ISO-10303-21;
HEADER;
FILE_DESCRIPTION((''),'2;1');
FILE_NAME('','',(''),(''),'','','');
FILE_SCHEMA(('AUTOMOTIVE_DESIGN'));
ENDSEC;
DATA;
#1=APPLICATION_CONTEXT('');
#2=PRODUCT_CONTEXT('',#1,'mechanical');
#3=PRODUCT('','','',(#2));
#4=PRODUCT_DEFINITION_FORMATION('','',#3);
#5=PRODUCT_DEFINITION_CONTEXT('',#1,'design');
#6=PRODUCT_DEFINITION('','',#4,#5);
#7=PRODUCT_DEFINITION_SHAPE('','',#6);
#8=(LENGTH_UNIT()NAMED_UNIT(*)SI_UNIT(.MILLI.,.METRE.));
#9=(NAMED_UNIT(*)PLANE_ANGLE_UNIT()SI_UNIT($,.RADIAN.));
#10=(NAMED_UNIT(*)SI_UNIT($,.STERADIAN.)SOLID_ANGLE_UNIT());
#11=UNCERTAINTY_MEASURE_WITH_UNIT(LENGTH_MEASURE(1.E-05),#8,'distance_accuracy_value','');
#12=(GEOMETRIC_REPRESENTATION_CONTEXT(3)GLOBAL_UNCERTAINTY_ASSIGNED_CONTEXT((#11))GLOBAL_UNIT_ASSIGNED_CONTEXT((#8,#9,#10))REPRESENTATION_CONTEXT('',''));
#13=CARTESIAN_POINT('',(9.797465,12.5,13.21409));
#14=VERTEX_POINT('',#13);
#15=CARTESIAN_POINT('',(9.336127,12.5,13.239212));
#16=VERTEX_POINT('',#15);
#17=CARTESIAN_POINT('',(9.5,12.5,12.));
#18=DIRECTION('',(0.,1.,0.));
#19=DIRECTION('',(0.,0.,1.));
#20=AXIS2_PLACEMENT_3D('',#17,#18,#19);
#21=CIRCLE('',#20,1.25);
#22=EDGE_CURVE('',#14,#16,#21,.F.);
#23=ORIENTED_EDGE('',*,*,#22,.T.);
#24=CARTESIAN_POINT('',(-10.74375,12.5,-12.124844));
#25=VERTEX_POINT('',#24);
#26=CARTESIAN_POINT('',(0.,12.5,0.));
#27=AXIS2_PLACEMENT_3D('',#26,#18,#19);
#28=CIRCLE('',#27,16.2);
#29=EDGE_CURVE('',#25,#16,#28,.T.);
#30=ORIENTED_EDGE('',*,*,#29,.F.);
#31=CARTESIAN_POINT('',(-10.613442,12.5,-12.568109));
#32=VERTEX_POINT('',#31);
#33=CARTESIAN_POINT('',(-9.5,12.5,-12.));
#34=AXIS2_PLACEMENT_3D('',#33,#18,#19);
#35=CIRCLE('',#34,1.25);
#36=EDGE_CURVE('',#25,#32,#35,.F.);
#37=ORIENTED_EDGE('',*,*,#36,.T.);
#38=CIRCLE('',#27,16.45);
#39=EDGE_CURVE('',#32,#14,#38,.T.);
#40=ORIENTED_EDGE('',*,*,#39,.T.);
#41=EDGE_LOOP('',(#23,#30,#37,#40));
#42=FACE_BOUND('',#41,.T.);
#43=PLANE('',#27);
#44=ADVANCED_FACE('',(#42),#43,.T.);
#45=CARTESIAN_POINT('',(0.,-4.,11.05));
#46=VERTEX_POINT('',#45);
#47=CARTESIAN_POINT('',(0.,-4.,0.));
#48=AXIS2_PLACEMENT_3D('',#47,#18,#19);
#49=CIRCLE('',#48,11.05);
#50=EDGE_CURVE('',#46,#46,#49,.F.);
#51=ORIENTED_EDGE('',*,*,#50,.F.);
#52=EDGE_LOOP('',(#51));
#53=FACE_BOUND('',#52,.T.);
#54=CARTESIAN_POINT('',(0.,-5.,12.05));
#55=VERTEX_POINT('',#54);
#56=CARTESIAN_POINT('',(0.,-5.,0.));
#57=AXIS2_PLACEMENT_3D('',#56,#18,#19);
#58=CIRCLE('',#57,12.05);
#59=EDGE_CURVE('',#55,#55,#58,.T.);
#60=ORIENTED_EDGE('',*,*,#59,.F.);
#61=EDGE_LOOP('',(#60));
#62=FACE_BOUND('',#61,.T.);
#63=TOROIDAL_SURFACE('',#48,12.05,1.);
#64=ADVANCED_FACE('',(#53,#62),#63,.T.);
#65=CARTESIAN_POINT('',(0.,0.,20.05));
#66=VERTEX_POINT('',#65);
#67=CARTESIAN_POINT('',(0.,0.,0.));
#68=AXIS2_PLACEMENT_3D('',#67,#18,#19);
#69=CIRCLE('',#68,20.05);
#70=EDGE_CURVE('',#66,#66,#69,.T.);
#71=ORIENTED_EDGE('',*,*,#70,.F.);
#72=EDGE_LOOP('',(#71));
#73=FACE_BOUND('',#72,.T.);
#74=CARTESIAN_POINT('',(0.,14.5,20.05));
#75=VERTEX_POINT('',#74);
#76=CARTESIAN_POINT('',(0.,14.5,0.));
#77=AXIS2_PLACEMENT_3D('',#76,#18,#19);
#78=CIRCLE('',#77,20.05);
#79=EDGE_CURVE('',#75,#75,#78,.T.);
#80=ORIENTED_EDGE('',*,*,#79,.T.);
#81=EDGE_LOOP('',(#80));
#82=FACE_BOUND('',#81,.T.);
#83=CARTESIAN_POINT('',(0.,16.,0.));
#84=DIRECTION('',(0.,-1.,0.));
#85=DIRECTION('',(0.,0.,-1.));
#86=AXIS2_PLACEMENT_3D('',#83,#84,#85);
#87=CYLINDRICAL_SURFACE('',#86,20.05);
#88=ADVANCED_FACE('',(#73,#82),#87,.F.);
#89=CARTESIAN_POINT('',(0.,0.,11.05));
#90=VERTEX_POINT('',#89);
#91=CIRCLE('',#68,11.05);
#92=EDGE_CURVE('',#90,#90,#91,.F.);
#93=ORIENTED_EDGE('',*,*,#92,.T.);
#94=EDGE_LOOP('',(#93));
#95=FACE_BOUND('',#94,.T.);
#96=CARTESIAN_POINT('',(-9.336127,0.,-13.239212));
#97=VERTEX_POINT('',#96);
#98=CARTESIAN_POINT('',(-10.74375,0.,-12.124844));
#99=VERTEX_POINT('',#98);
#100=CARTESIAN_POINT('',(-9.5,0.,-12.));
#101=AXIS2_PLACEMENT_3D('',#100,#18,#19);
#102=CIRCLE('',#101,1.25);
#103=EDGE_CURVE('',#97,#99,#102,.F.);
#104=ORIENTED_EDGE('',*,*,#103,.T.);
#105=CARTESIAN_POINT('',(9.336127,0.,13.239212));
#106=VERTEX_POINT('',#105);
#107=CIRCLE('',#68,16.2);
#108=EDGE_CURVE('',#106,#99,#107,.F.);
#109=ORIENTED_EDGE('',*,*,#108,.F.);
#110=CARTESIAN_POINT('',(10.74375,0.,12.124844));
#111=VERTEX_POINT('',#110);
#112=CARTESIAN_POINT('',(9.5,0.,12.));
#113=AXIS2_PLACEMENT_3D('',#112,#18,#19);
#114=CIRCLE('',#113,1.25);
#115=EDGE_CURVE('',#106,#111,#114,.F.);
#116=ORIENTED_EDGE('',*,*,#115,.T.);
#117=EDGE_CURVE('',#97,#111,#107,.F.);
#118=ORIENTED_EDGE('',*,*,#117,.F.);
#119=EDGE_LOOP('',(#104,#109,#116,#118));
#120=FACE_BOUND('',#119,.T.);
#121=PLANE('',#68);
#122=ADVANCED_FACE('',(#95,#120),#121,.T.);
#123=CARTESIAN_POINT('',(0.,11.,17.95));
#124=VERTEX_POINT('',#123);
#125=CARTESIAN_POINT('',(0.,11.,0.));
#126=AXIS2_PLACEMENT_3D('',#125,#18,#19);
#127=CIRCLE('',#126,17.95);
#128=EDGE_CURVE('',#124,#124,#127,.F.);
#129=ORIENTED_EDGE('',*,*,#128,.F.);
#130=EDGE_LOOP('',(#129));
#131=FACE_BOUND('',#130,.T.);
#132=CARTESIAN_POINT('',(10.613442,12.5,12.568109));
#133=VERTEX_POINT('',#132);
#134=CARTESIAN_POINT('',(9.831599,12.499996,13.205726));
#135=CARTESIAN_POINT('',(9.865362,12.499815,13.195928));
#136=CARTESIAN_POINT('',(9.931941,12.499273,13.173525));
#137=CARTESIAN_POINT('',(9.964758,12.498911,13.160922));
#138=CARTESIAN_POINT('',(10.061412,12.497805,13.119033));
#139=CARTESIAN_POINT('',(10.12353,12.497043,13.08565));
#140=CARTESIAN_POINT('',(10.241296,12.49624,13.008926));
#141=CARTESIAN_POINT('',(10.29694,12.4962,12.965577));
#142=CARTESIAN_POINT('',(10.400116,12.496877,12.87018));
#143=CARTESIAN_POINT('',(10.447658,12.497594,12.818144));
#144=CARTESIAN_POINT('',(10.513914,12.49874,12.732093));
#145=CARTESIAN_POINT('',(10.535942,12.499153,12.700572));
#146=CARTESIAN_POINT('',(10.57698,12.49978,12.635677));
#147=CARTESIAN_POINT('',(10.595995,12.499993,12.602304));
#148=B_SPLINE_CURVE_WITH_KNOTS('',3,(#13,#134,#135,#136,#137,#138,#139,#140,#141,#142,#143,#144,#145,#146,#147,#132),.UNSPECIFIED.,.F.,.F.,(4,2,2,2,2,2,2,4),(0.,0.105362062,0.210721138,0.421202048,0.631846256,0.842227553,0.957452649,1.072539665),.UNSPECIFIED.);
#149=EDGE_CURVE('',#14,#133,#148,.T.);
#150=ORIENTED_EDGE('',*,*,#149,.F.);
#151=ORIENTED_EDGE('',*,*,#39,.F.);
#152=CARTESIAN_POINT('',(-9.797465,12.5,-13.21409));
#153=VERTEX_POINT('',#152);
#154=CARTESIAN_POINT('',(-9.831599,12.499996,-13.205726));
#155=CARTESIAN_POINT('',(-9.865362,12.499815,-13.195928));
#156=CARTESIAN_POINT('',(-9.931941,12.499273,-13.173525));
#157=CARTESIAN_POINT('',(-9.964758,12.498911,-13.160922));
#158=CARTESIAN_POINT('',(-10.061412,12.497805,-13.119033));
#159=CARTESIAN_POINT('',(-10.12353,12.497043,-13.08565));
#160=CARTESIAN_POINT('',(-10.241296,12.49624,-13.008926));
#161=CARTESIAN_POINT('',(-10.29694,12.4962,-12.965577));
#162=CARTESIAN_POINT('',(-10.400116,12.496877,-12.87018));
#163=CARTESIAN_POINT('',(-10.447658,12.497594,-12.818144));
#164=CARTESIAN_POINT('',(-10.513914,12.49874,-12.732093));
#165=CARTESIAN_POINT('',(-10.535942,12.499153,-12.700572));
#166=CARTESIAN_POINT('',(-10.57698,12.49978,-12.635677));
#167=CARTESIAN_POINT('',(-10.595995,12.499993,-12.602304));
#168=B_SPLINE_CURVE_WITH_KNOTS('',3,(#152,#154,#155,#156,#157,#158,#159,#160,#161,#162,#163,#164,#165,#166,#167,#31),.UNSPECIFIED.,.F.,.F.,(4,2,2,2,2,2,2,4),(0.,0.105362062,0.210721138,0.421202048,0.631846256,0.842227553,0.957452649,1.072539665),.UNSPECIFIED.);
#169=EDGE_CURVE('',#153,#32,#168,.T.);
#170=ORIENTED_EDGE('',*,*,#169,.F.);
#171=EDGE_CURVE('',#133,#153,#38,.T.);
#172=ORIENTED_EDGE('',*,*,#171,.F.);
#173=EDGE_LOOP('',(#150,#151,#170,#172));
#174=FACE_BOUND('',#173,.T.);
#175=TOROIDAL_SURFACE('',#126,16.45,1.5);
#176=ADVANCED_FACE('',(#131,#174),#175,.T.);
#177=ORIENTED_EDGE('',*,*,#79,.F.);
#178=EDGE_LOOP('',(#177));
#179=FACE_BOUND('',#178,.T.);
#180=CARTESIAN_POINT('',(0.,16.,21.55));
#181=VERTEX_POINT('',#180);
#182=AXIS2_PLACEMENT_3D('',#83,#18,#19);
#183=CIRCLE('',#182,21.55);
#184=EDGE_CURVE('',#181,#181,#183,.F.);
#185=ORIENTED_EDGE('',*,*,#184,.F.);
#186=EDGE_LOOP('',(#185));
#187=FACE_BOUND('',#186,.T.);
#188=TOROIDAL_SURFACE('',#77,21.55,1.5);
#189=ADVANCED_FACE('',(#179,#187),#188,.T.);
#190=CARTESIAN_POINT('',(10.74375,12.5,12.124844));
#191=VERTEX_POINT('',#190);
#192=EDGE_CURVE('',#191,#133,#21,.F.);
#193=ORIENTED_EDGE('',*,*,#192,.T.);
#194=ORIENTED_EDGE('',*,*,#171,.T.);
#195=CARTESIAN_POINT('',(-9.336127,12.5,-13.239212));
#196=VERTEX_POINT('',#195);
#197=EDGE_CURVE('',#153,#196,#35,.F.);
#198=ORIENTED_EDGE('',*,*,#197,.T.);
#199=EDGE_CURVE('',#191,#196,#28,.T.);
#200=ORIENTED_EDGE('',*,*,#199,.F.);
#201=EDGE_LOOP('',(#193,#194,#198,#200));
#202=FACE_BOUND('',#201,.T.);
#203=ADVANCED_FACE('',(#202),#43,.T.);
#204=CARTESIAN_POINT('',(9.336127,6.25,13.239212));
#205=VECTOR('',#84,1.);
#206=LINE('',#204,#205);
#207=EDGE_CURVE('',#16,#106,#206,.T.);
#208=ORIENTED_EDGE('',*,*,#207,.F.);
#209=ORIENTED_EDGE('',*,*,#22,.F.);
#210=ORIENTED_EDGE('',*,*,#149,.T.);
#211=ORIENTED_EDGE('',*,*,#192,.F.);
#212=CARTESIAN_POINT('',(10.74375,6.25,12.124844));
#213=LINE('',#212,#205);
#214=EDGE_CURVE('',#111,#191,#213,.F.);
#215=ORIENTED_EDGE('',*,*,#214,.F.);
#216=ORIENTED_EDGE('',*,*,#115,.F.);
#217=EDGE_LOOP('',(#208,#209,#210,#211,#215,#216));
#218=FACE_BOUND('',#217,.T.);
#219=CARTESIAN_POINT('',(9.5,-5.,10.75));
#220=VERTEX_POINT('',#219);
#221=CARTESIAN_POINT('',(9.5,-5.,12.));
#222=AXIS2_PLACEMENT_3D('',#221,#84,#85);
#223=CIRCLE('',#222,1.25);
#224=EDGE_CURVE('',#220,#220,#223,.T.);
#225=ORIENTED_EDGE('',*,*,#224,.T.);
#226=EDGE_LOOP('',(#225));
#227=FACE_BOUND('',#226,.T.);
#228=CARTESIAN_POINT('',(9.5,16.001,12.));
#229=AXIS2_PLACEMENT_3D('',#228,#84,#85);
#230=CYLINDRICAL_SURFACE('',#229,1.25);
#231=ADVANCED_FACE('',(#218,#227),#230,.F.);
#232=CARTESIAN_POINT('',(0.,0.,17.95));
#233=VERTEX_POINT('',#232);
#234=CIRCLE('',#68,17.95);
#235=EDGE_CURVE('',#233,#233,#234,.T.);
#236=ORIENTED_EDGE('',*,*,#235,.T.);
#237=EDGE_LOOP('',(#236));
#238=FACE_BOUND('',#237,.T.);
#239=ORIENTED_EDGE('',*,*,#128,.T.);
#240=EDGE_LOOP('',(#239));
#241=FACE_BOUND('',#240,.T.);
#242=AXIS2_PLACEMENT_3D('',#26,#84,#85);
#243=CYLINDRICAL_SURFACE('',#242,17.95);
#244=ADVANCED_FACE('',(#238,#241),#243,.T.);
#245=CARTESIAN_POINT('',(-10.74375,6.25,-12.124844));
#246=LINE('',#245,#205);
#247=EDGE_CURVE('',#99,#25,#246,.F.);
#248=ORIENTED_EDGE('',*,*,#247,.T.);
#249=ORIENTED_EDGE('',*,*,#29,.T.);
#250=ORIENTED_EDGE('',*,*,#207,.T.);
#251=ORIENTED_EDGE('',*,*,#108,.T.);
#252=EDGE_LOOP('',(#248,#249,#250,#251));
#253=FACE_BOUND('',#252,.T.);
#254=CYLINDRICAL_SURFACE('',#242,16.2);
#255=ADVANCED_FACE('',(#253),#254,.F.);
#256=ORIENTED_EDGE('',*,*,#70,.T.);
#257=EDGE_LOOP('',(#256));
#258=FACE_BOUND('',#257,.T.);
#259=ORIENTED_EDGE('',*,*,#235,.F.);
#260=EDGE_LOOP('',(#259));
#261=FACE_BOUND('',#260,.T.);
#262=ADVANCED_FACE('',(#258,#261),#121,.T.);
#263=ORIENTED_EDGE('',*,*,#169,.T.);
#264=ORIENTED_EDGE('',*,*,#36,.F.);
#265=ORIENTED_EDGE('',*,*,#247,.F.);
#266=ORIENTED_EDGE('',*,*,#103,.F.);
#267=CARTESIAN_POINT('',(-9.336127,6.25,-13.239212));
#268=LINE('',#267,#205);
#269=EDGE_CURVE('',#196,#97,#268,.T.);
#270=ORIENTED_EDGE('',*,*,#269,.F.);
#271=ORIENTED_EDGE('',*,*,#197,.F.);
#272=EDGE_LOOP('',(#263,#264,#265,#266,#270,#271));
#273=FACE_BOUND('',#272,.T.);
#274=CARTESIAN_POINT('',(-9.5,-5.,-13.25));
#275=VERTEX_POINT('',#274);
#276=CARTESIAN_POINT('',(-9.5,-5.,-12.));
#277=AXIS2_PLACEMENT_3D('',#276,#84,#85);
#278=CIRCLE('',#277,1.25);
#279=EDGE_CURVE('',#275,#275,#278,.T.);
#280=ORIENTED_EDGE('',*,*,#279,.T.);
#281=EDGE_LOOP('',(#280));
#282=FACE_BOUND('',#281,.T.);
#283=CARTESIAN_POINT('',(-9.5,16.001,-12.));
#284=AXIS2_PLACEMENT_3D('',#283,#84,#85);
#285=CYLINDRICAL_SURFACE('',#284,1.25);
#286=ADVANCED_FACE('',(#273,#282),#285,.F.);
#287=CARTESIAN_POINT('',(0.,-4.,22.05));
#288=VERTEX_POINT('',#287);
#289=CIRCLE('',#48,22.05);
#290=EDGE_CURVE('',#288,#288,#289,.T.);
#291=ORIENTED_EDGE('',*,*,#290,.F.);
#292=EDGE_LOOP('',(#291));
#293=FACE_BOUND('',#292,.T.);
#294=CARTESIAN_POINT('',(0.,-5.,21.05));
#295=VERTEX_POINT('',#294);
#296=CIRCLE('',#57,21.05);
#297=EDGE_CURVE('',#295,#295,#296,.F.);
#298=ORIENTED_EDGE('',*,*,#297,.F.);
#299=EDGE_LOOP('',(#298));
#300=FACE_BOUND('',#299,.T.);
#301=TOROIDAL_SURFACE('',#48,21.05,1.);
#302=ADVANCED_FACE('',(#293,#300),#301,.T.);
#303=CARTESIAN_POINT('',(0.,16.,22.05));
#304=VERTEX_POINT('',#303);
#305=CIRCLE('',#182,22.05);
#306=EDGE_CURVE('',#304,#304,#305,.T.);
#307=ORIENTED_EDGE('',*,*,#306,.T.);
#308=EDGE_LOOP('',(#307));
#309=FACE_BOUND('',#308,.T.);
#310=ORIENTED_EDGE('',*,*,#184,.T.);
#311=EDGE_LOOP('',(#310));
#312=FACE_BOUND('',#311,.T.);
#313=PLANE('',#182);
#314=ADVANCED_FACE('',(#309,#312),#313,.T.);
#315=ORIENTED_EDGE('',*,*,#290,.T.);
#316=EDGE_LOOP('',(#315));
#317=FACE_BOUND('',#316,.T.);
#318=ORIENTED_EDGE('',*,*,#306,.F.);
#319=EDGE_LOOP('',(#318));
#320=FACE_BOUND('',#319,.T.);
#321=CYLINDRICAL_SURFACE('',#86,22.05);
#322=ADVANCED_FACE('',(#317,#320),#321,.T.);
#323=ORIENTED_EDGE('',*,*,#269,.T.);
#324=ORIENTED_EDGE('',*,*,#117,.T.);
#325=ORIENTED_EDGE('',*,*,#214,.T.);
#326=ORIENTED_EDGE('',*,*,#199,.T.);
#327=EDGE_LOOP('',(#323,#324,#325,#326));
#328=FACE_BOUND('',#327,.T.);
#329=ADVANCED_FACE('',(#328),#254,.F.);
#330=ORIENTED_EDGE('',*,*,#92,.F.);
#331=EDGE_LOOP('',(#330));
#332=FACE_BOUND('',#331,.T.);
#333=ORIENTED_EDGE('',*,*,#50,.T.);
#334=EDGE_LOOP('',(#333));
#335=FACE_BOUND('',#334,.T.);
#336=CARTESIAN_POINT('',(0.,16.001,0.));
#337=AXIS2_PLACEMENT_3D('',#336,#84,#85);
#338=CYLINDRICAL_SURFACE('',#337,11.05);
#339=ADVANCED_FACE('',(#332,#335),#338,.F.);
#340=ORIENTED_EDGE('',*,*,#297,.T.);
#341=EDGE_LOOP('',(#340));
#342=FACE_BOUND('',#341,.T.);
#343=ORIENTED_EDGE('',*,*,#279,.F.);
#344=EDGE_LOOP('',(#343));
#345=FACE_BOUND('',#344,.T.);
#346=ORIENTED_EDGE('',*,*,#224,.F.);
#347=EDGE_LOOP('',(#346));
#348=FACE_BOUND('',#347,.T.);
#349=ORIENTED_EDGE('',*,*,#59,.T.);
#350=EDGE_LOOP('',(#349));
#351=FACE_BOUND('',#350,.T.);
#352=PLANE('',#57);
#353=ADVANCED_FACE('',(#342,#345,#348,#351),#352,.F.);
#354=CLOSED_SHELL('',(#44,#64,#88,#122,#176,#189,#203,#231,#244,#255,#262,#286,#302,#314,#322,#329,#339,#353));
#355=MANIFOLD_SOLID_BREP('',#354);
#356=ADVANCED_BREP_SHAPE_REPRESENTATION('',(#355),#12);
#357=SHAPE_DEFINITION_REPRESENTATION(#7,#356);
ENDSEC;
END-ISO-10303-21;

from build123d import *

# Parameters (mm, degrees)
CROQUIS1_R              = 22.05
CROQUIS1_R_2            = 20.05
SALIENTE_EXTRUIR1_DEPTH = 16
CROQUIS1_4_R            = 17.95
CROQUIS1_4_R_2          = 16.2
SALIENTE_EXTRUIR2_DEPTH = 12.5
SALIENTE_EXTRUIR4_START = -5
CROQUIS1_6_R            = 22.05
CROQUIS1_6_R_2          = 20.05
CROQUIS1_6_R_3          = 17.95
CROQUIS1_6_R_4          = 16.2
SALIENTE_EXTRUIR4_DEPTH = 5
CORTAR_EXTRUIR1_REACH   = 39.595
CROQUIS4_R              = 11.05
CROQUIS4_R_2            = 1.25
REDONDEO1_R             = 1
REDONDEO2_R             = 1.5
REDONDEO3_R             = 1


with BuildPart() as part:
    # Croquis1 → Saliente-Extruir1 (new body)
    with BuildSketch(Plane(origin=(0, 0, 0), x_dir=(1, 0, 0), z_dir=(0, 1, 0))):
        with Locations(Location((0, 0, 0), (0, 0, 270))):
            Circle(CROQUIS1_R)
        with Locations(Location((0, 0, 0), (0, 0, 270))):
            Circle(CROQUIS1_R_2, mode=Mode.SUBTRACT)
    extrude(amount=SALIENTE_EXTRUIR1_DEPTH)



with BuildPart() as body_2:
    # Croquis1<4> → Saliente-Extruir2 (new body)
    with BuildSketch(Plane(origin=(0, 0, 0), x_dir=(1, 0, 0), z_dir=(0, 1, 0))):
        with Locations(Location((0, 0, 0), (0, 0, 270))):
            Circle(CROQUIS1_4_R)
        with Locations(Location((0, 0, 0), (0, 0, 270))):
            Circle(CROQUIS1_4_R_2, mode=Mode.SUBTRACT)
    extrude(amount=SALIENTE_EXTRUIR2_DEPTH)


with BuildPart() as part_1:
    add(part.part)

    add(body_2.part)  # Saliente-Extruir4 merges body 2
    # Croquis1<6> → Saliente-Extruir4 (add)
    # profile 1 of 4: a face of its own
    with BuildSketch(Plane(origin=(0, 0, 0), x_dir=(1, 0, 0), z_dir=(0, 1, 0)).offset(SALIENTE_EXTRUIR4_START)):
        with Locations(Location((0, 0, 0), (0, 0, 270))):
            Circle(CROQUIS1_6_R)
        with Locations(Location((0, 0, 0), (0, 0, 270))):
            Circle(CROQUIS1_6_R_2, mode=Mode.SUBTRACT)
    # profile 2 of 4: a face of its own
    with BuildSketch(Plane(origin=(0, 0, 0), x_dir=(1, 0, 0), z_dir=(0, 1, 0)).offset(SALIENTE_EXTRUIR4_START)):
        with Locations(Location((0, 0, 0), (0, 0, 270))):
            Circle(CROQUIS1_6_R_2)
        with Locations(Location((0, 0, 0), (0, 0, 270))):
            Circle(CROQUIS1_6_R_3, mode=Mode.SUBTRACT)
    # profile 3 of 4: a face of its own
    with BuildSketch(Plane(origin=(0, 0, 0), x_dir=(1, 0, 0), z_dir=(0, 1, 0)).offset(SALIENTE_EXTRUIR4_START)):
        with Locations(Location((0, 0, 0), (0, 0, 270))):
            Circle(CROQUIS1_6_R_3)
        with Locations(Location((0, 0, 0), (0, 0, 270))):
            Circle(CROQUIS1_6_R_4, mode=Mode.SUBTRACT)
    # profile 4 of 4: a face of its own
    with BuildSketch(Plane(origin=(0, 0, 0), x_dir=(1, 0, 0), z_dir=(0, 1, 0)).offset(SALIENTE_EXTRUIR4_START)):
        with Locations(Location((0, 0, 0), (0, 0, 270))):
            Circle(CROQUIS1_6_R_4)
    extrude(amount=SALIENTE_EXTRUIR4_DEPTH)

    # Croquis4 → Cortar-Extruir1 (cut, up to next)
    with BuildSketch(Plane.XZ.offset(5), mode=Mode.PRIVATE) as cortar_extruir1_sk1:
        with Locations(Location((0, 0, 0), (0, 0, 270))):
            Circle(CROQUIS4_R)
    cortar_extruir1_tool1 = extrude(cortar_extruir1_sk1.sketch, amount=-CORTAR_EXTRUIR1_REACH, mode=Mode.PRIVATE) & part_1.part
    # Croquis4 → Cortar-Extruir1 (cut, up to next)
    with BuildSketch(Plane.XZ.offset(5), mode=Mode.PRIVATE) as cortar_extruir1_sk2:
        with Locations(Location((9.5, 12, 0), (0, 0, 270))):
            Circle(CROQUIS4_R_2)
    cortar_extruir1_tool2 = extrude(cortar_extruir1_sk2.sketch, amount=-CORTAR_EXTRUIR1_REACH, mode=Mode.PRIVATE) & part_1.part
    # Croquis4 → Cortar-Extruir1 (cut, up to next)
    with BuildSketch(Plane.XZ.offset(5), mode=Mode.PRIVATE) as cortar_extruir1_sk3:
        with Locations(Location((-9.5, -12, 0), (0, 0, 270))):
            Circle(CROQUIS4_R_2)
    cortar_extruir1_tool3 = extrude(cortar_extruir1_sk3.sketch, amount=-CORTAR_EXTRUIR1_REACH, mode=Mode.PRIVATE) & part_1.part
    add(cortar_extruir1_tool1.solids().sort_by_distance((0, -5, 0))[0], mode=Mode.SUBTRACT)
    add(cortar_extruir1_tool2.solids().sort_by_distance((9.5, -5, 12))[0], mode=Mode.SUBTRACT)
    add(cortar_extruir1_tool3.solids().sort_by_distance((-9.5, -5, -12))[0], mode=Mode.SUBTRACT)

    # Redondeo1
    redondeo1_edges = [part_1.edges().sort_by_distance(p)[0] for p in [
        (0, -5, 11.05),
    ]]
    fillet(redondeo1_edges, radius=REDONDEO1_R)

    # Redondeo2
    # the kernel refuses this fillet: 1.5 mm, written as the material it takes off along each edge
    with BuildSketch(Plane(origin=(0, 12.5, 0), x_dir=(0, 0, 1), z_dir=(-1, 0, 0))) as redondeo2_piece_1:
        with BuildLine():
            CenterArc((17.95 - REDONDEO2_R, -REDONDEO2_R), REDONDEO2_R, 0, 90)
            Line((17.95, -REDONDEO2_R), (17.95, 0))
            Line((17.95, 0), (17.95 - REDONDEO2_R, 0))
        make_face()
    revolve(axis=Axis((0, 12.5, 0), (0, 1, 0)), mode=Mode.SUBTRACT)
    with BuildSketch(Plane(origin=(0, 16, 0), x_dir=(0, 0, 1), z_dir=(-1, 0, 0))) as redondeo2_piece_2:
        with BuildLine():
            CenterArc((20.05 + REDONDEO2_R, -REDONDEO2_R), REDONDEO2_R, 90, 90)
            Line((20.05, -REDONDEO2_R), (20.05, 0))
            Line((20.05, 0), (20.05 + REDONDEO2_R, 0))
        make_face()
    revolve(axis=Axis((0, 16, 0), (0, 1, 0)), mode=Mode.SUBTRACT)

    # Redondeo3
    redondeo3_edges = [part_1.edges().sort_by_distance(p)[0] for p in [
        (0, -5, -22.05),
    ]]
    fillet(redondeo3_edges, radius=REDONDEO3_R)


solid = part_1.part
